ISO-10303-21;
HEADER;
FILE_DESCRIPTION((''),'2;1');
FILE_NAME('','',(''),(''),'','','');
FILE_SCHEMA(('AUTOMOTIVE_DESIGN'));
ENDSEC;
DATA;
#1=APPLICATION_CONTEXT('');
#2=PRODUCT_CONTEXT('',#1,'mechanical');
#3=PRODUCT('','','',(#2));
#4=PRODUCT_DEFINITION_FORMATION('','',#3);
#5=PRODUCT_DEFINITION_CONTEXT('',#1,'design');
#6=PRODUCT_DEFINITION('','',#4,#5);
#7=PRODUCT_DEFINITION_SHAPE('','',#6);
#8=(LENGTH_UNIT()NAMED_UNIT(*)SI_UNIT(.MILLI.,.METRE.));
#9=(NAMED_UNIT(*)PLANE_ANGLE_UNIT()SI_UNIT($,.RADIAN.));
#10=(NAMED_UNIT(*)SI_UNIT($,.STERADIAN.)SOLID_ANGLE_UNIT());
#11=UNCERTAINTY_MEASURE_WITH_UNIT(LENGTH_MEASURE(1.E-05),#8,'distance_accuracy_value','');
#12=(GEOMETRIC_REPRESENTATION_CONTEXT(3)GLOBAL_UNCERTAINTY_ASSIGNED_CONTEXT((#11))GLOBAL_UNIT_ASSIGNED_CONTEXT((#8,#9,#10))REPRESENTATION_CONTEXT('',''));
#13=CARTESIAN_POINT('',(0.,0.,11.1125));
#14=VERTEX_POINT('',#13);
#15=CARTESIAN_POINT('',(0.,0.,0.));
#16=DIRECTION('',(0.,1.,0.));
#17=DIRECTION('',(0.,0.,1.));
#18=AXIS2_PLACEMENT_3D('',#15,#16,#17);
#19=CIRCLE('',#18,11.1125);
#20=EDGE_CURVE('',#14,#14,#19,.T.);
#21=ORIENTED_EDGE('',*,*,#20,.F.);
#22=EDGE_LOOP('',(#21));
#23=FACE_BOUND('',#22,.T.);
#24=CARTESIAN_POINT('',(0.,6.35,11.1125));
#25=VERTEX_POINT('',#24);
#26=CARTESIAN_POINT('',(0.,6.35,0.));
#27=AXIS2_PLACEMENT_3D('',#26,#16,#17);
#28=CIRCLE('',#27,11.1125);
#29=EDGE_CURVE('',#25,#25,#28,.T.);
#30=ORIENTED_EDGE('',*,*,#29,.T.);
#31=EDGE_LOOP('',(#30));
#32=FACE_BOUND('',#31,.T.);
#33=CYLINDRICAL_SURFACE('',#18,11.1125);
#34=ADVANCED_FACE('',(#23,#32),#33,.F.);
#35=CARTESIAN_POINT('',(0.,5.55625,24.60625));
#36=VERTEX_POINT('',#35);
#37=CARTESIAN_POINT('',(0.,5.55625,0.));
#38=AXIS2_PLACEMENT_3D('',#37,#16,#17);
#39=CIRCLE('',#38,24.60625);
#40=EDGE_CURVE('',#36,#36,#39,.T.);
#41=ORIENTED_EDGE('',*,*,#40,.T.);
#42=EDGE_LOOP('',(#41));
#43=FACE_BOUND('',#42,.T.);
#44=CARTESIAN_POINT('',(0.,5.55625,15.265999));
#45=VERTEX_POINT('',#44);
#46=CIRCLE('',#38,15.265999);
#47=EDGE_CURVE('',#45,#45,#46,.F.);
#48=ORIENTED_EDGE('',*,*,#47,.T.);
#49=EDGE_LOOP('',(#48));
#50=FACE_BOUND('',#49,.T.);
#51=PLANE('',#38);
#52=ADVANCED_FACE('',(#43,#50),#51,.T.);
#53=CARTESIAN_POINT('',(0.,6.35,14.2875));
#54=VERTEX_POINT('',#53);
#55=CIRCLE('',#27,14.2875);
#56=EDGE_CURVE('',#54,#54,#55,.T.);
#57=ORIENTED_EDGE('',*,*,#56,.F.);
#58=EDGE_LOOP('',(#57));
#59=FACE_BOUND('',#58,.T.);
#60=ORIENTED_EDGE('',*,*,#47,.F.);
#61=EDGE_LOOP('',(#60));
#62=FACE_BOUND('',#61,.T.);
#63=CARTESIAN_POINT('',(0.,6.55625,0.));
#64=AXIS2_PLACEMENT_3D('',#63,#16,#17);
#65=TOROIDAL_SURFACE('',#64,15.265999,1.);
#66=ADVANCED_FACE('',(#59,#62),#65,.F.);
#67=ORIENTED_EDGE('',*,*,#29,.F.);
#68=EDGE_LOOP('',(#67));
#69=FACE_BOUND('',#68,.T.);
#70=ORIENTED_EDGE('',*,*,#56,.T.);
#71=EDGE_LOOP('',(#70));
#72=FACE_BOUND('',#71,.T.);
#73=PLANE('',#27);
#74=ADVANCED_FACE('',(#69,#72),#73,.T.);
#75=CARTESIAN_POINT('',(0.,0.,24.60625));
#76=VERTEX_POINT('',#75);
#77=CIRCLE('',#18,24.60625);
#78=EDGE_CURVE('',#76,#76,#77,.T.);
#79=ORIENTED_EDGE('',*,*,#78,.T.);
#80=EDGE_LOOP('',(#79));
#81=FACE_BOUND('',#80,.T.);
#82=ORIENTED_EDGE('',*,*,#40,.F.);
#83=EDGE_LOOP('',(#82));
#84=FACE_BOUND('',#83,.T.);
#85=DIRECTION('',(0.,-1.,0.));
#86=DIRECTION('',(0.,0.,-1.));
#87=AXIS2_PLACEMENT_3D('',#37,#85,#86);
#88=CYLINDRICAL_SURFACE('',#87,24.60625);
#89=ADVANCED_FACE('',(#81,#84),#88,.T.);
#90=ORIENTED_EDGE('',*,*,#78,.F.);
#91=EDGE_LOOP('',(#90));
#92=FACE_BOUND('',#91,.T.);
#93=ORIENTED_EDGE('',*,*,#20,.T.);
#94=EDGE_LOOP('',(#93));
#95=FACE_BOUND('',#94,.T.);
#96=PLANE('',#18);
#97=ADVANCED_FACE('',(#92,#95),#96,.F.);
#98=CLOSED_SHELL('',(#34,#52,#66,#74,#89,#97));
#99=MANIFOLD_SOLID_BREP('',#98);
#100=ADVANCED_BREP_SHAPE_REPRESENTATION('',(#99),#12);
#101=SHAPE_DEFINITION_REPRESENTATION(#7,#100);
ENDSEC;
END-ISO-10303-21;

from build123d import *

# Parameters (mm, degrees)
SKETCH1_R           = 24.60625
BOSS_EXTRUDE1_DEPTH = 5.55625
SKETCH2_R           = 14.2875
BOSS_EXTRUDE2_DEPTH = 0.79375
SKETCH3_R           = 11.1125
CUT_EXTRUDE1_DEPTH  = 36.373119429
FILLET1_R           = 1


with BuildPart() as part:
    # Sketch1 → Boss-Extrude1 (new body)
    with BuildSketch(Plane(origin=(0, 0, 0), x_dir=(1, 0, 0), z_dir=(0, 1, 0))):
        with Locations(Location((0, 0, 0), (0, 0, 270))):
            Circle(SKETCH1_R)
    extrude(amount=BOSS_EXTRUDE1_DEPTH)

    # Sketch2 → Boss-Extrude2 (add)
    with BuildSketch(Plane(origin=(0, 5.55625, 0), x_dir=(1, 0, 0), z_dir=(0, 1, 0))):
        with Locations(Location((0, 0, 0), (0, 0, 270))):
            Circle(SKETCH2_R)
    extrude(amount=BOSS_EXTRUDE2_DEPTH)

    # Sketch3 → Cut-Extrude1 (cut, through all)
    with BuildSketch(Plane(origin=(0, 6.35, 0), x_dir=(1, 0, 0), z_dir=(0, 1, 0))):
        with Locations(Location((0, 0, 0), (0, 0, 270))):
            Circle(SKETCH3_R)
    extrude(amount=-CUT_EXTRUDE1_DEPTH, mode=Mode.SUBTRACT)

    # Fillet1
    # the kernel refuses this fillet: 1 mm, written as the material it adds along each edge
    with BuildSketch(Plane(origin=(0, 5.55625, 0), x_dir=(0, 0, 1), z_dir=(-1, 0, 0))) as fillet1_piece_1:
        with BuildLine():
            CenterArc((15.265999329, 1), FILLET1_R, 191.902682649, 78.097317351)
            Line((14.2875, 0.79375), (14.267930013, 0.789625))
            ThreePointArc((14.267930013, 0.789625), (14.2675, 0.396875), (14.2675, 0))
            Line((14.2675, 0), (14.2875, -0.02))
            Line((14.2875, -0.02), (15.265999329, -0.02))
            Line((15.265999329, -0.02), (15.265999329, 0))
        make_face()
    revolve(axis=Axis((0, 5.55625, 0), (0, 1, 0)))


solid = part.part
